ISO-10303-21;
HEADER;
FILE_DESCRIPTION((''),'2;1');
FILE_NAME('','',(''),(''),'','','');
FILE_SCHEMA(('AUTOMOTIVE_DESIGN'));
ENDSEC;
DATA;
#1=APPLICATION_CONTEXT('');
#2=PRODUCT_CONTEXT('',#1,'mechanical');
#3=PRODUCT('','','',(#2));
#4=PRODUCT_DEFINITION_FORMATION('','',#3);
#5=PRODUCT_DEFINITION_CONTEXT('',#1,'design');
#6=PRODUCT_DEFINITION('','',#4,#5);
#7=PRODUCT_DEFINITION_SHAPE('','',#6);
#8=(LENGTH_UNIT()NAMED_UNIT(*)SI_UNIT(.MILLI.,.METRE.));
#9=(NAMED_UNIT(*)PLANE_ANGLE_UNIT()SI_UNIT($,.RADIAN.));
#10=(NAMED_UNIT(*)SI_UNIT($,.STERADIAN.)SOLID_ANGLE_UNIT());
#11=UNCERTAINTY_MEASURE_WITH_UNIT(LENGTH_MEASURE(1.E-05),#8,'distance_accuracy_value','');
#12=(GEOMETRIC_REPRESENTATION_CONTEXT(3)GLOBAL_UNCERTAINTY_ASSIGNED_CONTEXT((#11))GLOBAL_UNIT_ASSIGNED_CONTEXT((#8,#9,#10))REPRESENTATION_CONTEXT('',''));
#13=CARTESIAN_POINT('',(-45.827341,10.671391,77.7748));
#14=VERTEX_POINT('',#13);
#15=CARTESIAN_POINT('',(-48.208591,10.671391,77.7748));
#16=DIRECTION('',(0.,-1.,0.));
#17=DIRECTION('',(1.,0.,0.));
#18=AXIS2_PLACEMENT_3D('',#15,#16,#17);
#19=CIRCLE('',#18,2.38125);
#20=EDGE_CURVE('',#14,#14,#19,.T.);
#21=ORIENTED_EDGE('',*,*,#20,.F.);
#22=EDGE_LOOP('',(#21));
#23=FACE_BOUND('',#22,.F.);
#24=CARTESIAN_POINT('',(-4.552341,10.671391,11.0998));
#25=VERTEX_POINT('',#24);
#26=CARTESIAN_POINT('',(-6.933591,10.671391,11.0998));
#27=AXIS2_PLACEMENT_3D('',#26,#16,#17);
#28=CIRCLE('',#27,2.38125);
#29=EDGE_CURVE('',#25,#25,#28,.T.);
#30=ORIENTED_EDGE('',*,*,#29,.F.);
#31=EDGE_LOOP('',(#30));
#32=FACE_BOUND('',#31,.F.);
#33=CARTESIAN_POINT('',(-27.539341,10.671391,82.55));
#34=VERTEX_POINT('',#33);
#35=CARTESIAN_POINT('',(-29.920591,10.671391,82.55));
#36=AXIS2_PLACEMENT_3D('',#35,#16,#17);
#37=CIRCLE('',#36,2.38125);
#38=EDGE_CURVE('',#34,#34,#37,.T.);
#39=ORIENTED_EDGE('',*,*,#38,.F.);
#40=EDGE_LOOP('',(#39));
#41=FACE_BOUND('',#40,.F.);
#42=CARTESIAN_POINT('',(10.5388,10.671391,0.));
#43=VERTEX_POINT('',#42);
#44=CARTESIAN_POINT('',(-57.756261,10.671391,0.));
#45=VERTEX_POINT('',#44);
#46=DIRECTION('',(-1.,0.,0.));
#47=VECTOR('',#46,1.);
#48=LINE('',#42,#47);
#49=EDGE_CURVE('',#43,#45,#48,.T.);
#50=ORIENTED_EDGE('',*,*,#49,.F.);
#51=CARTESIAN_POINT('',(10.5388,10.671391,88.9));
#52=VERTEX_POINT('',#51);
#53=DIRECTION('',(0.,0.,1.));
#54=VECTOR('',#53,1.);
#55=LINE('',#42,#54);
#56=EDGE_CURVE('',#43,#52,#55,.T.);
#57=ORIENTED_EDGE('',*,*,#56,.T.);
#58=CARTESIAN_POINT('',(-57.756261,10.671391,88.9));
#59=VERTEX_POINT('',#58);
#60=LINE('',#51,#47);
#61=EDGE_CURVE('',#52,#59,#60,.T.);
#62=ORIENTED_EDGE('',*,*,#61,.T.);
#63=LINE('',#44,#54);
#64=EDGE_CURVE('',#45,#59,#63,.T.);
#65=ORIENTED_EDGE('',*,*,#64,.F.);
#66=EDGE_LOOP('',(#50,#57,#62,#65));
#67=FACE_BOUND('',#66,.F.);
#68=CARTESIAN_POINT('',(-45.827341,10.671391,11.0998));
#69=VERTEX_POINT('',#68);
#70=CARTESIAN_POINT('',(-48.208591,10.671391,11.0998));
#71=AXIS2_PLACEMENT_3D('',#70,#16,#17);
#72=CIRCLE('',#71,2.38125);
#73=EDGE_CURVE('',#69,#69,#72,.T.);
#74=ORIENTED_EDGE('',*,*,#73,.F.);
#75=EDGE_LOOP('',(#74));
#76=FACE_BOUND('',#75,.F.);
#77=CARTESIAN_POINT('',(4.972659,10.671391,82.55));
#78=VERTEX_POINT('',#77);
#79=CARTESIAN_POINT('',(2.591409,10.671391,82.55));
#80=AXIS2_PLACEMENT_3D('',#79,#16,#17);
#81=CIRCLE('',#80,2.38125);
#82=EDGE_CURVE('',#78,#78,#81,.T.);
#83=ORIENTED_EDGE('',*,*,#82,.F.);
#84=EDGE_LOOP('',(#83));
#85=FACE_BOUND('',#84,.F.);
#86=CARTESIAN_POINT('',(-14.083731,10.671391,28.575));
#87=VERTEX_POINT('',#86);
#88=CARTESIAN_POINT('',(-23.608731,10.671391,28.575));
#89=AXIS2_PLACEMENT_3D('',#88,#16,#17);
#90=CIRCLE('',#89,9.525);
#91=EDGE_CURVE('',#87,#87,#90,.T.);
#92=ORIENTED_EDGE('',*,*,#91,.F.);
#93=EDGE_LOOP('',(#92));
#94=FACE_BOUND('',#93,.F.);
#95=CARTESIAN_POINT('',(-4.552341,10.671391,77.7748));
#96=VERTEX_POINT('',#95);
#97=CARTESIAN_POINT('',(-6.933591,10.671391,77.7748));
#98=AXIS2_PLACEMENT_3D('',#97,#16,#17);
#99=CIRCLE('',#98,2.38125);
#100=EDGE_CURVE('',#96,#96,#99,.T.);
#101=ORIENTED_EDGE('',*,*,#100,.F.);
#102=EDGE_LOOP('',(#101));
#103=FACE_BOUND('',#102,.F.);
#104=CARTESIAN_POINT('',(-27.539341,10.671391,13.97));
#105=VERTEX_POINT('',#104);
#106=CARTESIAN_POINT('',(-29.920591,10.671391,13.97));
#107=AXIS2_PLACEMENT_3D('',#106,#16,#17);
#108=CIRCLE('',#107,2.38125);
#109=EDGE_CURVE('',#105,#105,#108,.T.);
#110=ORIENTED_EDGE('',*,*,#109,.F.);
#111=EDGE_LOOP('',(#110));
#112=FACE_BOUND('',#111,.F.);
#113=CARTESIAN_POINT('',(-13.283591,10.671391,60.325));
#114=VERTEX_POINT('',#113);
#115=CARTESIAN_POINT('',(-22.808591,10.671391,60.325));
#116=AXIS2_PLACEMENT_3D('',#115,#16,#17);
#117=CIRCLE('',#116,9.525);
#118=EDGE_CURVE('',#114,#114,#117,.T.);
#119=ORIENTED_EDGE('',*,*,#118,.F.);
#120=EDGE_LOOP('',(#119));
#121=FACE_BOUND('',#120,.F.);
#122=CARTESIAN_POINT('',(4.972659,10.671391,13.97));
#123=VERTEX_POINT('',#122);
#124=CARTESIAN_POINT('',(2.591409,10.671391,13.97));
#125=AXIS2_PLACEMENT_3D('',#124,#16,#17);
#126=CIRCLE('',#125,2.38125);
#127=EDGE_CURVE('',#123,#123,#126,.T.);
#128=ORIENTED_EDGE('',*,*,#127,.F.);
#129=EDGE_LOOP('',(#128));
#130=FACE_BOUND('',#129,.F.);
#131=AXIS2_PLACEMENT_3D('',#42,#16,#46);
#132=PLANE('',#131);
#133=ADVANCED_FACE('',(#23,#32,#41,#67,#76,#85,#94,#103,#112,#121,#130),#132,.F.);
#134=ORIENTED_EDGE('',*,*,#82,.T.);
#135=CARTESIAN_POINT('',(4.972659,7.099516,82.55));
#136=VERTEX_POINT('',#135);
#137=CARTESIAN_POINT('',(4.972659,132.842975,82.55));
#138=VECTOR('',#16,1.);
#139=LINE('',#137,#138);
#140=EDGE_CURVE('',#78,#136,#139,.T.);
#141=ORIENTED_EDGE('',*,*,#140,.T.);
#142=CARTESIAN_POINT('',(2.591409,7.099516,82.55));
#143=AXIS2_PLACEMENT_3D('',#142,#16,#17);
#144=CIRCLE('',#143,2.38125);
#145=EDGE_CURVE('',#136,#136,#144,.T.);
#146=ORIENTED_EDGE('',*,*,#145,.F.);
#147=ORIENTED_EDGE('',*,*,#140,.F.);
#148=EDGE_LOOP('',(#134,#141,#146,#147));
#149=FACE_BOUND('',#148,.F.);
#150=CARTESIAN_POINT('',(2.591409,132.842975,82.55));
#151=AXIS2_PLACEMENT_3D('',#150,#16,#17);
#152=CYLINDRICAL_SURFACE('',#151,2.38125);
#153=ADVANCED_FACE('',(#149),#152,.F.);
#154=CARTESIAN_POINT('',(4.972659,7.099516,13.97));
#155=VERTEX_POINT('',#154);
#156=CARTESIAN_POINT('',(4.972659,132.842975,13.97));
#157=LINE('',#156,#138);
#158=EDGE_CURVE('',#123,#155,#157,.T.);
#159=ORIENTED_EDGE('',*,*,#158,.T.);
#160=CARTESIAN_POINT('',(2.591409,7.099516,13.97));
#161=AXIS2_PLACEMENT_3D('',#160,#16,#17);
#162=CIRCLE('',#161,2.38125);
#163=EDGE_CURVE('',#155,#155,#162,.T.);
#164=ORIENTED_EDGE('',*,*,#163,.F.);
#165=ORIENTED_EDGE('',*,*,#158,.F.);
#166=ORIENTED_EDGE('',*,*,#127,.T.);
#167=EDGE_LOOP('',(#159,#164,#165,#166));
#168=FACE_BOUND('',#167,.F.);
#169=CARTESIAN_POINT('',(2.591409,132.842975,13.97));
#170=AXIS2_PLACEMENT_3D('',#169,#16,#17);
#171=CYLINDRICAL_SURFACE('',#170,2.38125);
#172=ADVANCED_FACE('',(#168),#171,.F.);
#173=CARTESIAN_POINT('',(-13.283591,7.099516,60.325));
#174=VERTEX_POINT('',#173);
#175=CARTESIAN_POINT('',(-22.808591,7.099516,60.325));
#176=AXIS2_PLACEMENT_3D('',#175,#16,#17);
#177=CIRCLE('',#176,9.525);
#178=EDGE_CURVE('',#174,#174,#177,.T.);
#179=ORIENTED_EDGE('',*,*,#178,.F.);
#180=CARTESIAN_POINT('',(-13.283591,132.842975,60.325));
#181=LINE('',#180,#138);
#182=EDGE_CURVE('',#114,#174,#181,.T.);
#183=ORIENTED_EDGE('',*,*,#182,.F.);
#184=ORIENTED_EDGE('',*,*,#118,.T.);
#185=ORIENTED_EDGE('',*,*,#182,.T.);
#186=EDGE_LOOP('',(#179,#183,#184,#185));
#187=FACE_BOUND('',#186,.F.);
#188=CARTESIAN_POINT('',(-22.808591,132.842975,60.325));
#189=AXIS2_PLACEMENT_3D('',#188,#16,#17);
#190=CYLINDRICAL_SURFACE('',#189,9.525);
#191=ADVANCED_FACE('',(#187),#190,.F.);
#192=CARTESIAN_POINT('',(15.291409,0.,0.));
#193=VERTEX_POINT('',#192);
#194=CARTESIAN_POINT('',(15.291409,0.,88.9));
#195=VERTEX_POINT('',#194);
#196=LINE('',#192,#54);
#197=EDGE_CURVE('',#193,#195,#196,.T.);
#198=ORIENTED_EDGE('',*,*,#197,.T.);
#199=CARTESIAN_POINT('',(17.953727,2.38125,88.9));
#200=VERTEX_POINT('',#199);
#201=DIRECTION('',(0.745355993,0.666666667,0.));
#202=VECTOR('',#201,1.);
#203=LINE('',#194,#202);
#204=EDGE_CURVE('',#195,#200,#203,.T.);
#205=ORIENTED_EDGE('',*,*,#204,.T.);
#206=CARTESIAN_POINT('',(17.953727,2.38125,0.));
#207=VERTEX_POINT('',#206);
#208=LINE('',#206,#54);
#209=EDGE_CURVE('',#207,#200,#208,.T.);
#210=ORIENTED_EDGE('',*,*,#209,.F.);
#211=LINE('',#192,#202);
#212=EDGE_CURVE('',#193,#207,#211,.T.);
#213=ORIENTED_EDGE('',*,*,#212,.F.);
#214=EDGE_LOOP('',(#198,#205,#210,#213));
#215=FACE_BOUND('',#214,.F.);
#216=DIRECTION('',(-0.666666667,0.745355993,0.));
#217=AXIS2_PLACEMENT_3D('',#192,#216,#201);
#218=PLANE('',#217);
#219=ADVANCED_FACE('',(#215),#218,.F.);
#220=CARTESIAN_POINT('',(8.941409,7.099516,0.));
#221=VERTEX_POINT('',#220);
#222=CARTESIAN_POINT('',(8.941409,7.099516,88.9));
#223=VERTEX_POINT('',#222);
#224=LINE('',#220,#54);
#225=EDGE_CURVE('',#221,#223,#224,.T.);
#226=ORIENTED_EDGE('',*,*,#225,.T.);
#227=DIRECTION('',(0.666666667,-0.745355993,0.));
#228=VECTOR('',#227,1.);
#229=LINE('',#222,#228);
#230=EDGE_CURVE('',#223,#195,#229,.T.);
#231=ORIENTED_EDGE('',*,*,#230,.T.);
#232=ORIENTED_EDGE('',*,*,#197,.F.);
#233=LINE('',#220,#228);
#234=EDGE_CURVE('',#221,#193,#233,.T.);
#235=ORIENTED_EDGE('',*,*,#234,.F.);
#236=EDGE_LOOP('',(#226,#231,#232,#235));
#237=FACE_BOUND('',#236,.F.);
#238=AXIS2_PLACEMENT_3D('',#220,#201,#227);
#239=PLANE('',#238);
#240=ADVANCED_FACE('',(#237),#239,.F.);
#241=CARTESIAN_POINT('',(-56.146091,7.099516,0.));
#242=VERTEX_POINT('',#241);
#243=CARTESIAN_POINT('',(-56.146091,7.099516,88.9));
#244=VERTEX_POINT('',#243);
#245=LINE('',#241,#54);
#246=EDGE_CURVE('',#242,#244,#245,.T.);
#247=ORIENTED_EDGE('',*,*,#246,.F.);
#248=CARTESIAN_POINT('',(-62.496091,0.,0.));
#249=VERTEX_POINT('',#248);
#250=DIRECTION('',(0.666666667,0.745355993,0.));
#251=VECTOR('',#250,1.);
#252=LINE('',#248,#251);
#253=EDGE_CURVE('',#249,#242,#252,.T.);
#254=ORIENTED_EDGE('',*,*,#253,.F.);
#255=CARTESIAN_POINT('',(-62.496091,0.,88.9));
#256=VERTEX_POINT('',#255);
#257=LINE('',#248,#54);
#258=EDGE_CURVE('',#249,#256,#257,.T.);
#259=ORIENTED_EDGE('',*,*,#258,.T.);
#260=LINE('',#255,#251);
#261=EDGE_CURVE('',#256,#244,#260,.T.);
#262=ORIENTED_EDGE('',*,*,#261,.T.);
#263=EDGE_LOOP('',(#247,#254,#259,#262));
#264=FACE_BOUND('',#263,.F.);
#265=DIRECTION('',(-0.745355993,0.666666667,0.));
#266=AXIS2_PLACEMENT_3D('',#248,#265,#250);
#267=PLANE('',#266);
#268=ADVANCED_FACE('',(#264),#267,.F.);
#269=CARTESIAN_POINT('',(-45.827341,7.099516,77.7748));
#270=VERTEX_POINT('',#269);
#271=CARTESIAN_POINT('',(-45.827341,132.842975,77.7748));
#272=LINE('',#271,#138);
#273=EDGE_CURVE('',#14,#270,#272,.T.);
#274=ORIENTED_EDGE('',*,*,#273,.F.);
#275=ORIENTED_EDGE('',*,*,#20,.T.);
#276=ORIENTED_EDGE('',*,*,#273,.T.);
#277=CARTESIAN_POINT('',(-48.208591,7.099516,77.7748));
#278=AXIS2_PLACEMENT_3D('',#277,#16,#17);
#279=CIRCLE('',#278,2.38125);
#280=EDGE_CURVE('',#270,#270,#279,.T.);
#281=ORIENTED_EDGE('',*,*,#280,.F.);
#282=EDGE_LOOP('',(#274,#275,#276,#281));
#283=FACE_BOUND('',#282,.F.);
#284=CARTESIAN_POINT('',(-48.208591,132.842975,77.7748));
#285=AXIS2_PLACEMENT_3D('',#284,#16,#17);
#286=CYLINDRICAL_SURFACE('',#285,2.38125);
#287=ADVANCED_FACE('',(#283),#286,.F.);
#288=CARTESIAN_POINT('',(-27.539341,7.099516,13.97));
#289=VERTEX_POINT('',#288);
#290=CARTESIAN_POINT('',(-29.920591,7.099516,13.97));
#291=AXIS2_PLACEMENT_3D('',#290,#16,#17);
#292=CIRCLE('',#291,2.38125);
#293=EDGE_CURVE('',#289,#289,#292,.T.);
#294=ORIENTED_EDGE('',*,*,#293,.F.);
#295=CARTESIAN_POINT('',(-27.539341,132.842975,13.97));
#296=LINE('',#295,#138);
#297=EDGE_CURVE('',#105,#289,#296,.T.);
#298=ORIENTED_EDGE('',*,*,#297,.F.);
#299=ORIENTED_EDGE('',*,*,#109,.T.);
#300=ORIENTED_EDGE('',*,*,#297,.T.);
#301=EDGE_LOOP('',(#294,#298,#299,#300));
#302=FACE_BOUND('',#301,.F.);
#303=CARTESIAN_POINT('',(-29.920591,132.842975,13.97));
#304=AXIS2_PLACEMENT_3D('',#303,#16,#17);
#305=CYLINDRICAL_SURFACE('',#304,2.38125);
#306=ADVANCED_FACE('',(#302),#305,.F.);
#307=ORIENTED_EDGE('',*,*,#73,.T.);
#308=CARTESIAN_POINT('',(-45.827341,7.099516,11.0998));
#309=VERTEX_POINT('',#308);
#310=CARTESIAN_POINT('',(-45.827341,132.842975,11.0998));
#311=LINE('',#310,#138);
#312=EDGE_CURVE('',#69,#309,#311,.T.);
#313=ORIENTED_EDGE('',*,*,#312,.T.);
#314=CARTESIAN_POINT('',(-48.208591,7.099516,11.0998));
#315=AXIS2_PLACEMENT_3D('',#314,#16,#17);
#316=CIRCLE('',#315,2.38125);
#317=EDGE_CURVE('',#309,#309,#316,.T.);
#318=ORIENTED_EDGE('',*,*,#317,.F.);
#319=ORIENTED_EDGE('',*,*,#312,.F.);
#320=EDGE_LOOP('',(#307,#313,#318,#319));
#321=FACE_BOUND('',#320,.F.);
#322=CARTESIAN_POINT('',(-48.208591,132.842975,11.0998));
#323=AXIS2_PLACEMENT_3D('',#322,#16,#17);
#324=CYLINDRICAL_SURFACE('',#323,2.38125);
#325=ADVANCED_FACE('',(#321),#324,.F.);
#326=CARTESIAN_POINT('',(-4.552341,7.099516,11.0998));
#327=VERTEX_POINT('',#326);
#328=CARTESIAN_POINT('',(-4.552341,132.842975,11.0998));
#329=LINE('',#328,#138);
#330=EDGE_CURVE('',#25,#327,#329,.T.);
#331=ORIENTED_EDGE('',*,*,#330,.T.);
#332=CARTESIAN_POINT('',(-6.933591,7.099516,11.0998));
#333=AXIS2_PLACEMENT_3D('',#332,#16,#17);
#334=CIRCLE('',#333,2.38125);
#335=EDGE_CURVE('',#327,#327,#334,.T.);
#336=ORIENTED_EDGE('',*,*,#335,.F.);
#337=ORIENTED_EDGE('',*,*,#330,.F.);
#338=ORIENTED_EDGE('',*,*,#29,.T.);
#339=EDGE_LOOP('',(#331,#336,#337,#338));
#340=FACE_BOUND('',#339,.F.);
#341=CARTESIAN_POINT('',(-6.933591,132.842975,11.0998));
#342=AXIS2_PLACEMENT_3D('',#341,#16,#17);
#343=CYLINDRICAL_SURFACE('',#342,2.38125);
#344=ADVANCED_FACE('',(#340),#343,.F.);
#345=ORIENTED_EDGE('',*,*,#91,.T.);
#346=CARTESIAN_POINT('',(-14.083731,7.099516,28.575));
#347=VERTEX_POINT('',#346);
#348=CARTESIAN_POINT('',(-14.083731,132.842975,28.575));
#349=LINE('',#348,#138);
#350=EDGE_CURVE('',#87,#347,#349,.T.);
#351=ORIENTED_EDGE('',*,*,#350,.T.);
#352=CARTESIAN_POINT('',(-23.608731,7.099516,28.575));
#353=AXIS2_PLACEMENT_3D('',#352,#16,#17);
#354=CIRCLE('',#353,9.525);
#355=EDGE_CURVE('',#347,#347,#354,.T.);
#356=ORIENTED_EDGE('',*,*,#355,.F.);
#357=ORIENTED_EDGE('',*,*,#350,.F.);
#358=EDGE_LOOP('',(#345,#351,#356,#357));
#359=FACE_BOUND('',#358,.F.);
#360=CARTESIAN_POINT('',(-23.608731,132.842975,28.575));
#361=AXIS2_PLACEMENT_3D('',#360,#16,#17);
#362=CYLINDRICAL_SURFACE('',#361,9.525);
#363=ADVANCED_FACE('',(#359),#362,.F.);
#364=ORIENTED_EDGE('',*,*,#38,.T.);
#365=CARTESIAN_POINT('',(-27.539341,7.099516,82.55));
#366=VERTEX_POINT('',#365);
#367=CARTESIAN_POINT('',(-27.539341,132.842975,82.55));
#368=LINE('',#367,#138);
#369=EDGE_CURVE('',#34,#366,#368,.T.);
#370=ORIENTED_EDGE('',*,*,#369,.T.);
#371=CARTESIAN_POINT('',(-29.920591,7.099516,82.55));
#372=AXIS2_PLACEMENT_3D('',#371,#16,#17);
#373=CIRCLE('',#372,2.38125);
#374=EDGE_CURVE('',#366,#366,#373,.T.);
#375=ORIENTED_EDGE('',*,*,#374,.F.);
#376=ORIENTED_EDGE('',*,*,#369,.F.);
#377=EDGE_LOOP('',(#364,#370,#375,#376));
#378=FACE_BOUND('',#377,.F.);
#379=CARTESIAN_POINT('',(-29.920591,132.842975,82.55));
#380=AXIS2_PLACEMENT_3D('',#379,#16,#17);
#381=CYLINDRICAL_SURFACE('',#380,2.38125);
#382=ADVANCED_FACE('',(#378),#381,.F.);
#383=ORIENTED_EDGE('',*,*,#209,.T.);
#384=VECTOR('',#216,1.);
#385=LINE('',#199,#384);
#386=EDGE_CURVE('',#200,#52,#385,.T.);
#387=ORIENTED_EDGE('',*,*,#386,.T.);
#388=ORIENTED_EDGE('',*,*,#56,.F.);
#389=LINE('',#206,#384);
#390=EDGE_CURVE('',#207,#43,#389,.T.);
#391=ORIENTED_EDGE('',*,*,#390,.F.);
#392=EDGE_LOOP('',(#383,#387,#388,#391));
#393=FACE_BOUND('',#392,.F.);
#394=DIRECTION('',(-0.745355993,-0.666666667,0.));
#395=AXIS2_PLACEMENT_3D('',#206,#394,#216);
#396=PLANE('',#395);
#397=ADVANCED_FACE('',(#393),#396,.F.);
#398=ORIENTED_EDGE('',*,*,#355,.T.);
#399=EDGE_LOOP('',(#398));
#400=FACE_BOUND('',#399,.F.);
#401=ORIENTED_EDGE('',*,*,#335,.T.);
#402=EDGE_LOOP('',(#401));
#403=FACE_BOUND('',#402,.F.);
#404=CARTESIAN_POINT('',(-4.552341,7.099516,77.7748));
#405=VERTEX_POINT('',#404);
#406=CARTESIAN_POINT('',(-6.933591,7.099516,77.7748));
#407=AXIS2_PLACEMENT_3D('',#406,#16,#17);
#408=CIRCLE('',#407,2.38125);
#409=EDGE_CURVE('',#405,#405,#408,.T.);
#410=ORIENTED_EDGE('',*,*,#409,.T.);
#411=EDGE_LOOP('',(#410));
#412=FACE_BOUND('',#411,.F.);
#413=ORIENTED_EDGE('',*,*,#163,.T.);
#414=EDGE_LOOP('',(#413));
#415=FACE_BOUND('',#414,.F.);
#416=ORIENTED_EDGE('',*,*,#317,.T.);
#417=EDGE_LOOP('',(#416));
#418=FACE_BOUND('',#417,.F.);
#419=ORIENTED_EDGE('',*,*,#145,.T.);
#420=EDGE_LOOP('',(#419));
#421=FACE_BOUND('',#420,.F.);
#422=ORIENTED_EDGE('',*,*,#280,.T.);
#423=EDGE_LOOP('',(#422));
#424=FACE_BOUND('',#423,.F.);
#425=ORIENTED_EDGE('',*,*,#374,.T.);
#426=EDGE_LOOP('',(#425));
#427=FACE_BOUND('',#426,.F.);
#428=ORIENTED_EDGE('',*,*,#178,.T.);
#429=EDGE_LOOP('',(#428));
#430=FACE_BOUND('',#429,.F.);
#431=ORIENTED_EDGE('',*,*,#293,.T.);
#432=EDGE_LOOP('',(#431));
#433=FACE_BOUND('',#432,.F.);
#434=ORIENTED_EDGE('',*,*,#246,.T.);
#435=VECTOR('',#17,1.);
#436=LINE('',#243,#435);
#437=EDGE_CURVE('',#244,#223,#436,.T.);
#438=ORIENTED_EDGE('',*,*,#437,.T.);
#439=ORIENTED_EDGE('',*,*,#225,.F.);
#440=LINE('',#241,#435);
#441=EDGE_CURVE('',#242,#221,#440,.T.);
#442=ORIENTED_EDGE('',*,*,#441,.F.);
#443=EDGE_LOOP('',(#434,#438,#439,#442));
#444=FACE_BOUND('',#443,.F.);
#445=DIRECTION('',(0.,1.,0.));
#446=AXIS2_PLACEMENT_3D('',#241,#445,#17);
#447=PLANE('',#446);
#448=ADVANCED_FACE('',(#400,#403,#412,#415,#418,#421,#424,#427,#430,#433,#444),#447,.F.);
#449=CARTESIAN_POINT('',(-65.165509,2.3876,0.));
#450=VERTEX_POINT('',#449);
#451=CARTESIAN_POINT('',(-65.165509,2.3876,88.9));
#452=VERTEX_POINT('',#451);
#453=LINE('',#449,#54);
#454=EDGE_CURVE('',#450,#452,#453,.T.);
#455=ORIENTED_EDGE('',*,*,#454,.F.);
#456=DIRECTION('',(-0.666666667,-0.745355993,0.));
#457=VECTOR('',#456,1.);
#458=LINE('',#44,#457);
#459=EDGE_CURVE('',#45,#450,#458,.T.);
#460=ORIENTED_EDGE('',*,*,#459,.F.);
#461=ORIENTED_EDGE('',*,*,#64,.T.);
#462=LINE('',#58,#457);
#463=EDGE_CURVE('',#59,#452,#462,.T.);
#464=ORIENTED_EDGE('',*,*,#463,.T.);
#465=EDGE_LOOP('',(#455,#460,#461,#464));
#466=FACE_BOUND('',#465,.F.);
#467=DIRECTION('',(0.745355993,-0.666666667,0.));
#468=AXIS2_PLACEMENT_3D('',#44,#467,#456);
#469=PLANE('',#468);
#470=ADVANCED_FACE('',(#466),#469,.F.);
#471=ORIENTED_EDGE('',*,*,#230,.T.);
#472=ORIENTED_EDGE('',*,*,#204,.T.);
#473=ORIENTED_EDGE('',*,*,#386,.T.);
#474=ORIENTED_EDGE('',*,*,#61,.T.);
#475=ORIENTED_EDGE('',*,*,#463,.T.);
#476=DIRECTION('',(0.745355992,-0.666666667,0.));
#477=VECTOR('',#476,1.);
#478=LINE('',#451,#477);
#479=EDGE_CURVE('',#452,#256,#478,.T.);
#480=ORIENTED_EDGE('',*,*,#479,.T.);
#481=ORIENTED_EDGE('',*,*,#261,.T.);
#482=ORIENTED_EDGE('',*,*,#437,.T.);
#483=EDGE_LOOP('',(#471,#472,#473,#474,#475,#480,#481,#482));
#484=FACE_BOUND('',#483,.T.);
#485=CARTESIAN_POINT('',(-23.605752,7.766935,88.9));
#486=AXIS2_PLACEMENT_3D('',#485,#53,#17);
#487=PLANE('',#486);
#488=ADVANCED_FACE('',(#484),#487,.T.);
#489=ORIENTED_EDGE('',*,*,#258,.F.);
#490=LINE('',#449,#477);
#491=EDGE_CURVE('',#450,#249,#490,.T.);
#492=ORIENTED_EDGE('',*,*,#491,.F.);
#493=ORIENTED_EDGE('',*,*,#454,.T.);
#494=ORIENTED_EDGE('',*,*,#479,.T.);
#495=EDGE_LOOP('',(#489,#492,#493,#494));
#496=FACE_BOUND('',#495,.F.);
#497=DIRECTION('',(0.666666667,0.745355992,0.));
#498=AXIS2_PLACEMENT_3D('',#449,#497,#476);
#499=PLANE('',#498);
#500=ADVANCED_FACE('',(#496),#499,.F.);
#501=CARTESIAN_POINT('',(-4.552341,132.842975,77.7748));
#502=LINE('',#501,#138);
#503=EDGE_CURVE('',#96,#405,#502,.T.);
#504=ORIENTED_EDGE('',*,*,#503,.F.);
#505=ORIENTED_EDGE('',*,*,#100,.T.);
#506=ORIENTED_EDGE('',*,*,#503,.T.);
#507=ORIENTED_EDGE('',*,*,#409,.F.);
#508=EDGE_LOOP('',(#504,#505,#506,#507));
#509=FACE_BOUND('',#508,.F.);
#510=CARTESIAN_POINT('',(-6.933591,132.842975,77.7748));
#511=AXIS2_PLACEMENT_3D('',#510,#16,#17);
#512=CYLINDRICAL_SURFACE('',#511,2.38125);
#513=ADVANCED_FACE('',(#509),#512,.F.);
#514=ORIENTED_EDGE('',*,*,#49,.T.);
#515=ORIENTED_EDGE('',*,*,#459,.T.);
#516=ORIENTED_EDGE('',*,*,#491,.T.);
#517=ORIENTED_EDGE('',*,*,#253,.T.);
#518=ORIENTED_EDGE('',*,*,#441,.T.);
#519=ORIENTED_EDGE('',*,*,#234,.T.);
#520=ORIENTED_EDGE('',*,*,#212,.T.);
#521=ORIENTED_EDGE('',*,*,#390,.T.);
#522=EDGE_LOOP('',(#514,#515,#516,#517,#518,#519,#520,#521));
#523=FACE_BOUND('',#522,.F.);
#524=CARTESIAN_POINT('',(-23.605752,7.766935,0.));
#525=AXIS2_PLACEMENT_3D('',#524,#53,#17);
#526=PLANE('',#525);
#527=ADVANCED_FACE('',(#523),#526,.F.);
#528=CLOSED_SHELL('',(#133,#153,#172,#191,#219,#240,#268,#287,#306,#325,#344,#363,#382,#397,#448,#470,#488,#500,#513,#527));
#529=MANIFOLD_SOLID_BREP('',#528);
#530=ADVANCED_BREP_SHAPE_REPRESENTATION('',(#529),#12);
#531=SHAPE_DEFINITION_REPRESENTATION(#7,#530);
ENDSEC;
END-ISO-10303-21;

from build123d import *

# Parameters (mm, degrees)
F1_DEPTH = 88.9
F3_D     = 19.05
F5_D     = 4.7625


# Not quite as in the source:
# - a feature names something its author has since deleted; it is built from what else it names


with BuildPart() as f1:
    # F0 (on Top) → F1 (new body)
    with BuildSketch(Plane.XY):
        Polygon((10.538799933, 10.6713908286), (-57.7562613184, 10.6713908286), (-65.16550908, 2.3876), (-62.4960911285, 0), (-56.1460911285, 7.0995158286), (8.9414088715, 7.0995158286), (15.2914088715, 0), (17.9537273073, 2.38125), align=None)
    extrude(amount=F1_DEPTH)

    # F3 (through all)
    with Locations(Plane(origin=(0, 10.6713908286, 0), x_dir=(-1, 0, 0), z_dir=(0, 1, 0))):
        with Locations((22.8085911285, 60.325), (23.6087306927, 28.575)):
            Hole(F3_D / 2)

    # F5 (through all)
    with Locations(Plane(origin=(0, 10.6713908286, 0), x_dir=(-1, 0, 0), z_dir=(0, 1, 0))):
        with Locations((-2.5914088715, 82.55), (29.9205911285, 82.55), (29.9205911285, 13.97), (-2.5914088715, 13.97), (48.2085911285, 11.0998), (48.2085911285, 77.7748), (6.9335911285, 77.7748), (6.9335911285, 11.0998)):
            Hole(F5_D / 2)


solid = f1.part
